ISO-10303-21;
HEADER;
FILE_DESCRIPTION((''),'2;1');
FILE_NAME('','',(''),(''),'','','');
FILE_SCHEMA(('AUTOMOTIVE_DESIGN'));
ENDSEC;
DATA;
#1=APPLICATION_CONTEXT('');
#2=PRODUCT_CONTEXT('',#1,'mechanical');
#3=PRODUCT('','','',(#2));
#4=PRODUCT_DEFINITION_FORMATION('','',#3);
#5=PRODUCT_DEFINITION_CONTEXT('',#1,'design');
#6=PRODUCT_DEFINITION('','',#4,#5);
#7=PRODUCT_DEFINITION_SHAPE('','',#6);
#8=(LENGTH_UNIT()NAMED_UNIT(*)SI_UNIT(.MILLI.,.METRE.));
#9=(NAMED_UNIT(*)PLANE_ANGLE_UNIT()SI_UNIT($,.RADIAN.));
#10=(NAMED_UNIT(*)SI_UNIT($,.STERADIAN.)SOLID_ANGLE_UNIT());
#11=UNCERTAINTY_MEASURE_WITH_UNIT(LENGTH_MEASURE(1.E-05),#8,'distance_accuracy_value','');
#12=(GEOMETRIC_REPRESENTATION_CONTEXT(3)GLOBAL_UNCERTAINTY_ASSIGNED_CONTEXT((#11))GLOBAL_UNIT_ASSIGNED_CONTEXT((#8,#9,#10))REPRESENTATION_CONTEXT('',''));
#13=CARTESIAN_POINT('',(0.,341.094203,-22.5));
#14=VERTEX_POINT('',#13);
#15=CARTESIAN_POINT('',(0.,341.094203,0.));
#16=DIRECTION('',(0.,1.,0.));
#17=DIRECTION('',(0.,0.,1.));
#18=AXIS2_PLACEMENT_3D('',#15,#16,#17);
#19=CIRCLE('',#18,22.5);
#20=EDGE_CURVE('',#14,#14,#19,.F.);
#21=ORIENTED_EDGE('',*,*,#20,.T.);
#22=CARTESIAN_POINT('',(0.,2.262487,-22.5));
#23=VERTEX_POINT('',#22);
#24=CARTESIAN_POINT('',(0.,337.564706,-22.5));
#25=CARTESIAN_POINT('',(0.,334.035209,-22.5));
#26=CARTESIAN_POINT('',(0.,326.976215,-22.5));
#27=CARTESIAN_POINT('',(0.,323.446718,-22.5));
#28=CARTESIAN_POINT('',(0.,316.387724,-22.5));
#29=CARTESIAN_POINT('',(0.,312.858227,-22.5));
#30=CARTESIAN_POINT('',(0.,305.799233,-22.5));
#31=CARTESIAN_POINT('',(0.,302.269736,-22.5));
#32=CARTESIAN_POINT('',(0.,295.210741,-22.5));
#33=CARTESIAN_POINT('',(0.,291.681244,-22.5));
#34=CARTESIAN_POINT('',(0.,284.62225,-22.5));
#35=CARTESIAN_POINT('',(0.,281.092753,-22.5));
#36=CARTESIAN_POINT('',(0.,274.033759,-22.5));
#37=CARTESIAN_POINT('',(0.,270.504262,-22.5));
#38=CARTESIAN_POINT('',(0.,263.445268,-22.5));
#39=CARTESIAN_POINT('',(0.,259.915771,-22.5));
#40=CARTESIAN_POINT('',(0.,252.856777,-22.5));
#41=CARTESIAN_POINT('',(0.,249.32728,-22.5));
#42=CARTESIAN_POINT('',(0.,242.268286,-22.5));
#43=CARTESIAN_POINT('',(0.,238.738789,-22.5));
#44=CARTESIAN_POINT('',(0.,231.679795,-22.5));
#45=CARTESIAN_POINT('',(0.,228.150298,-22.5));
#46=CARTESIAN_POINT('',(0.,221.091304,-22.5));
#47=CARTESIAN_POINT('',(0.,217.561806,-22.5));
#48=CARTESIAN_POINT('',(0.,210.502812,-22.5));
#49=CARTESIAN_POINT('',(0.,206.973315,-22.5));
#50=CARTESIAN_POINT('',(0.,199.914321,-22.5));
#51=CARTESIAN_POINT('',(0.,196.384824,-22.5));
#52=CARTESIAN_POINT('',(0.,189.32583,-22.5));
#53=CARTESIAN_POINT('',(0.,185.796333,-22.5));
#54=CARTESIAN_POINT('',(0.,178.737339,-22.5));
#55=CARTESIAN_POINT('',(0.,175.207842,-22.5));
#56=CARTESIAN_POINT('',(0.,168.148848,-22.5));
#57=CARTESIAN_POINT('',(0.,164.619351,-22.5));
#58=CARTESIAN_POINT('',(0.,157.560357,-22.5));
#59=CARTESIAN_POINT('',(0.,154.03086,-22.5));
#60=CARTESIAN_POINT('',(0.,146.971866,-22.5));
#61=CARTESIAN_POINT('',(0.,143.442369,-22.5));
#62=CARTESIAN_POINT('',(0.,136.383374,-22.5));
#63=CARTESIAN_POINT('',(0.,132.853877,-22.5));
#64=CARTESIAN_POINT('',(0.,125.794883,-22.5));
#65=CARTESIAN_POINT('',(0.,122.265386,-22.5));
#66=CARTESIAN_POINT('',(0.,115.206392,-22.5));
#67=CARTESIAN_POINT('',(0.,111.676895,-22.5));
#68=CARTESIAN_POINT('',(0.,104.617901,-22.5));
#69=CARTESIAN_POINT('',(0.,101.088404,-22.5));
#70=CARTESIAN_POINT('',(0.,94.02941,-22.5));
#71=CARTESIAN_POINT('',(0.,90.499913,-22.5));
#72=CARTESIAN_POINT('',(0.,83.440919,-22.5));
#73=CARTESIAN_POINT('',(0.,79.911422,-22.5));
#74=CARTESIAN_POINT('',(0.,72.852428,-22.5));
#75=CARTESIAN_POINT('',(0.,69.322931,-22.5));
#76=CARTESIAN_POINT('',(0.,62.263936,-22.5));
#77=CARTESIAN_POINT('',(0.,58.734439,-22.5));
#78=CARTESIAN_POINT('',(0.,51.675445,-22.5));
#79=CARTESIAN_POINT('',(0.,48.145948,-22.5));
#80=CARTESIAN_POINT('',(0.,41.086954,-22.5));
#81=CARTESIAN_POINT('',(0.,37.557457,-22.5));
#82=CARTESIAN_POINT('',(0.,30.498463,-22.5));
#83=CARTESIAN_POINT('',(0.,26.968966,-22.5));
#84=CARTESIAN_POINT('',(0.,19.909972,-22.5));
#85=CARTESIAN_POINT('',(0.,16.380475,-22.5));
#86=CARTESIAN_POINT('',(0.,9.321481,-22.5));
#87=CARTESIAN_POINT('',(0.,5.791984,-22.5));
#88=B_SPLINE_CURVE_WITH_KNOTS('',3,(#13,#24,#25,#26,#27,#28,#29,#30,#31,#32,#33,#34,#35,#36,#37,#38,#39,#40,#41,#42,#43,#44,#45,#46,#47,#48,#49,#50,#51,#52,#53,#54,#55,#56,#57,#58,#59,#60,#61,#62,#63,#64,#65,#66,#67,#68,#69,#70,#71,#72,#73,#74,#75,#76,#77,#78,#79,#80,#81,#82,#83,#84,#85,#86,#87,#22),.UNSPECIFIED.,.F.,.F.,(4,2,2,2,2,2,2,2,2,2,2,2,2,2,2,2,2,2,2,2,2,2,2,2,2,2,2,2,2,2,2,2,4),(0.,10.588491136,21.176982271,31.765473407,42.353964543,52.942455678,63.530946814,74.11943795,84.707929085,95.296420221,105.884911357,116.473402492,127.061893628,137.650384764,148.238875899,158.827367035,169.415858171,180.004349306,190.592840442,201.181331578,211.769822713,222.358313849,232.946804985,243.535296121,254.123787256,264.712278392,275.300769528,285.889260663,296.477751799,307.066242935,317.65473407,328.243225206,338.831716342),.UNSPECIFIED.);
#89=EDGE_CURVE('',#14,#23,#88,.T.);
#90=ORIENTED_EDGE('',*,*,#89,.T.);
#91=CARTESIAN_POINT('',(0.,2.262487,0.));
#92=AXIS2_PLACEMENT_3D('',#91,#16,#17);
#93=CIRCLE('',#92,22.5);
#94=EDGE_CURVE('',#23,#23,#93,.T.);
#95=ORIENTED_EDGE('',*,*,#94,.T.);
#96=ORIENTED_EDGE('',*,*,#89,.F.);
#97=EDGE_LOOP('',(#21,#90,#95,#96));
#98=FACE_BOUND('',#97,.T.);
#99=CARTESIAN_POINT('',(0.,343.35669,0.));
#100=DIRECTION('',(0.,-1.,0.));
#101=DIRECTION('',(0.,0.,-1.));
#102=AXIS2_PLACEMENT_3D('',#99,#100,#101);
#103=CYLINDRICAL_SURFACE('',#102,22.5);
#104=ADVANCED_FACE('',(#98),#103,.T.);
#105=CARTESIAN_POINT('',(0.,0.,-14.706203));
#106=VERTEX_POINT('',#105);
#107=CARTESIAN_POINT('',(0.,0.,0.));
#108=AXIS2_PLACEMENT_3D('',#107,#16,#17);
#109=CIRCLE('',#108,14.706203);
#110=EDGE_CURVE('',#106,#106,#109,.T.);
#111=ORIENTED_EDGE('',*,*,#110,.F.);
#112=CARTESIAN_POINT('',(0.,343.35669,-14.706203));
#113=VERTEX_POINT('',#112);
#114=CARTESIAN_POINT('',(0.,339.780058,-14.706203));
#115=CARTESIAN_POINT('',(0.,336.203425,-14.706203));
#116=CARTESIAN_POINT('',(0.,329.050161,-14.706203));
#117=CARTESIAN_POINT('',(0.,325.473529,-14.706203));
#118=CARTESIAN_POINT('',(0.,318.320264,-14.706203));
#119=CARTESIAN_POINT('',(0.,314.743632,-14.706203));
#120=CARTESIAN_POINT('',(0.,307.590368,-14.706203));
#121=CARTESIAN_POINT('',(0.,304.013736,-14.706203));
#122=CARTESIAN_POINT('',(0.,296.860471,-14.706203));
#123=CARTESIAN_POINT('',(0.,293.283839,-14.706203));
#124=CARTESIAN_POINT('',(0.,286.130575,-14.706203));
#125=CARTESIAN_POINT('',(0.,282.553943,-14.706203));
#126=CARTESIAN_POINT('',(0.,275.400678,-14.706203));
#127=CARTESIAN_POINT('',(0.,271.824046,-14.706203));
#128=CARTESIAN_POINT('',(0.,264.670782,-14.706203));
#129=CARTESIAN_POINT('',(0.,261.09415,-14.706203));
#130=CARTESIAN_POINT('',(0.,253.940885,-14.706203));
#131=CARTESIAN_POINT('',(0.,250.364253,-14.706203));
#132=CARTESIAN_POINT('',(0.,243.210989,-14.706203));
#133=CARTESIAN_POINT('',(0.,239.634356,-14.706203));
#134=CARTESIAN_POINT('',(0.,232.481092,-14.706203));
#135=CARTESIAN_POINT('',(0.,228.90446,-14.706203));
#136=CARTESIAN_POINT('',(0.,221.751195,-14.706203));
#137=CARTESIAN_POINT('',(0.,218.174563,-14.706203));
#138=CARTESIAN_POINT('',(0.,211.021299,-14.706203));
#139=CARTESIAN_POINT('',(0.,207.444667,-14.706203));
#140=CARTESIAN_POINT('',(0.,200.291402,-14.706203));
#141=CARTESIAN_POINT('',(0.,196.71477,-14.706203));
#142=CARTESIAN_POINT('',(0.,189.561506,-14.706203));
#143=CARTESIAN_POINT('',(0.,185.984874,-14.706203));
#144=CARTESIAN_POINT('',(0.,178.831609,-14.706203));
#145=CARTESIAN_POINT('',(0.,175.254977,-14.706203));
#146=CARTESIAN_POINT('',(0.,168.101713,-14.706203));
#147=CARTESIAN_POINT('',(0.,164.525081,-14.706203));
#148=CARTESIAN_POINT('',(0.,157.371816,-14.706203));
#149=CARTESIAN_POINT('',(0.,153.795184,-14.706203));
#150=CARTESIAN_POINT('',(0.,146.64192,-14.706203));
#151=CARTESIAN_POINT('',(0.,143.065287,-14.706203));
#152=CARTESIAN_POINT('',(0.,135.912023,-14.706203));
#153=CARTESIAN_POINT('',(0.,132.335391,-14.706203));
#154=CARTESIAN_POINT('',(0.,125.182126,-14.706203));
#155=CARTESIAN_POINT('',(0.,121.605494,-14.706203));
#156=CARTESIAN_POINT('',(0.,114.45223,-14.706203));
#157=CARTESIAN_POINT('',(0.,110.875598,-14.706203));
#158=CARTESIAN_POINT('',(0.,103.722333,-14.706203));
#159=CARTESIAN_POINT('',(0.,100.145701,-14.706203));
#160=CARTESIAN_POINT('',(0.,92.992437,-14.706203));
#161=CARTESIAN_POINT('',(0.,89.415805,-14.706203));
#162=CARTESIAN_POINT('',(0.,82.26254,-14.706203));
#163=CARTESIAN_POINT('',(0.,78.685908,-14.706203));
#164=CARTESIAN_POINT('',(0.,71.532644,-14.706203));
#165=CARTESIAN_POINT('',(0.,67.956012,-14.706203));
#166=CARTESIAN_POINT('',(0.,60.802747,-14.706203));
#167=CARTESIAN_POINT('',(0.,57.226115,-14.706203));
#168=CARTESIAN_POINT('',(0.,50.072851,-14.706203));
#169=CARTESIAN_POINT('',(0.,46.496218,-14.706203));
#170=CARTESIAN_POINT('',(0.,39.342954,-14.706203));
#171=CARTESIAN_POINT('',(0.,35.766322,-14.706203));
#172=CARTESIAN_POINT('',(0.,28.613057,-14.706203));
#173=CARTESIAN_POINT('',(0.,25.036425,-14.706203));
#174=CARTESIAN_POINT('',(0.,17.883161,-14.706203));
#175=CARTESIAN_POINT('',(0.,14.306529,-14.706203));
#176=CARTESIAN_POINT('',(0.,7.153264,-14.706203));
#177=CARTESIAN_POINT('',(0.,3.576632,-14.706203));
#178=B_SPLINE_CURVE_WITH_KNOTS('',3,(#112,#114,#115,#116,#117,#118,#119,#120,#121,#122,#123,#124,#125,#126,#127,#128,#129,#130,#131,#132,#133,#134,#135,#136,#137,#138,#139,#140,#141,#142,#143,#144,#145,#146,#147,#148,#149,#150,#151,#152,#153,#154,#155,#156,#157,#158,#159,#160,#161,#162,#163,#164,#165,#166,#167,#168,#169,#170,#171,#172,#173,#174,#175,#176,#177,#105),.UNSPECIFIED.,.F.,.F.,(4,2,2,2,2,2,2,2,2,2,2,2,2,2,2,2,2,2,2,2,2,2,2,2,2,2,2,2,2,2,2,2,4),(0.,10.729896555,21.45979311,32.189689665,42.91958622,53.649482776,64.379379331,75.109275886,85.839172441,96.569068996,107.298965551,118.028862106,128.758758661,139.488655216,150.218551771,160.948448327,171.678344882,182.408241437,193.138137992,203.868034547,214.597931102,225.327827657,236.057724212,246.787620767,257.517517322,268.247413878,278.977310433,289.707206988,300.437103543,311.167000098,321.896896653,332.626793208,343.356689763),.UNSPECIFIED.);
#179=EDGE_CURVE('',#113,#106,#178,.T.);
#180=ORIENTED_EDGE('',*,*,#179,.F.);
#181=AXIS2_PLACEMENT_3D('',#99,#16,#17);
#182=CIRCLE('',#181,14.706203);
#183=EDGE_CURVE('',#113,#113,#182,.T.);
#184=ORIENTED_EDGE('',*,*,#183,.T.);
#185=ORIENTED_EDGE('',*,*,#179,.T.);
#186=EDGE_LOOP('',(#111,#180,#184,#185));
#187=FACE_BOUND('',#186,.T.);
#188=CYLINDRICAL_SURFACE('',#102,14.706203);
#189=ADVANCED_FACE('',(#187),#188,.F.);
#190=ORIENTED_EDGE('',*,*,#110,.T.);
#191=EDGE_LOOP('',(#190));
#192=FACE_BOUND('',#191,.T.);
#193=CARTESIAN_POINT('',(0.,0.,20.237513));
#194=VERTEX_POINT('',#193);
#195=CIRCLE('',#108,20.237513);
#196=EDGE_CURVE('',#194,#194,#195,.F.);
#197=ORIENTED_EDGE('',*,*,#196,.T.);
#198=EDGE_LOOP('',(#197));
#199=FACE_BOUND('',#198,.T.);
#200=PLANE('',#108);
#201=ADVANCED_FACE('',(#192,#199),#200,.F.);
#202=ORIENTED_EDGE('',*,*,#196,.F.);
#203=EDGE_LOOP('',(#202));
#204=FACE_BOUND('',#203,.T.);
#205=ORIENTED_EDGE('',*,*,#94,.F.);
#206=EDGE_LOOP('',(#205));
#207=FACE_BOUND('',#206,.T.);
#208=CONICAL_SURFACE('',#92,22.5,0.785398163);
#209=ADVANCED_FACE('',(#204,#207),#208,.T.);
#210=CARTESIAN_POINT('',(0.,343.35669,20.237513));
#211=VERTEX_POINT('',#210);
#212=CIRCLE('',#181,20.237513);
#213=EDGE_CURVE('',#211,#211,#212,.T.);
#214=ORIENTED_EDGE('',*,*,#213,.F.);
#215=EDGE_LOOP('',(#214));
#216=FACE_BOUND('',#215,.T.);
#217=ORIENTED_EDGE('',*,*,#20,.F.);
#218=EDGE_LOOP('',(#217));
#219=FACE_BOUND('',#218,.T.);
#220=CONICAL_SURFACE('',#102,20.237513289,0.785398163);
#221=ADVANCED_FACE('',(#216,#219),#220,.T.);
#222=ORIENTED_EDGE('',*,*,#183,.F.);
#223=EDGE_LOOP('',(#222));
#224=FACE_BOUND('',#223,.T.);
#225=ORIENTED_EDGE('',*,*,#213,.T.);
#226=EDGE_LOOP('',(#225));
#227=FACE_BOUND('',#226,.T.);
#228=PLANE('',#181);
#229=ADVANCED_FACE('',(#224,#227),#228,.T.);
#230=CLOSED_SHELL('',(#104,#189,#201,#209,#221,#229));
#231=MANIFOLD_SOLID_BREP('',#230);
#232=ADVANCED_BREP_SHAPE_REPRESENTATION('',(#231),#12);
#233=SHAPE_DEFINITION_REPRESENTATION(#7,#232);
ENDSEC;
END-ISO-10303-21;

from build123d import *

# Parameters (mm, degrees)
SKETCH1_R           = 22.5
BOSS_EXTRUDE1_DEPTH = 343.356689763
SKETCH2_R           = 14.706203314
CUT_EXTRUDE1_DEPTH  = 345.827951891
CHAMFER1_SIZE       = 2.262486711


with BuildPart() as part:
    # Sketch1 → Boss-Extrude1 (new body)
    with BuildSketch(Plane(origin=(0, 0, 0), x_dir=(1, 0, 0), z_dir=(0, 1, 0))):
        Circle(SKETCH1_R)
    extrude(amount=BOSS_EXTRUDE1_DEPTH)

    # Sketch2 → Cut-Extrude1 (cut, through all)
    with BuildSketch(Plane(origin=(0, 0, 0), x_dir=(1, 0, 0), z_dir=(0, 1, 0))):
        Circle(SKETCH2_R)
    extrude(amount=CUT_EXTRUDE1_DEPTH, mode=Mode.SUBTRACT)

    # Chamfer1
    chamfer1_edges = [part.edges().sort_by_distance(p)[0] for p in [
        (-22.5, 343.356689763, 0),
        (-22.5, 0, 0),
    ]]
    chamfer(chamfer1_edges, length=CHAMFER1_SIZE)


solid = part.part
